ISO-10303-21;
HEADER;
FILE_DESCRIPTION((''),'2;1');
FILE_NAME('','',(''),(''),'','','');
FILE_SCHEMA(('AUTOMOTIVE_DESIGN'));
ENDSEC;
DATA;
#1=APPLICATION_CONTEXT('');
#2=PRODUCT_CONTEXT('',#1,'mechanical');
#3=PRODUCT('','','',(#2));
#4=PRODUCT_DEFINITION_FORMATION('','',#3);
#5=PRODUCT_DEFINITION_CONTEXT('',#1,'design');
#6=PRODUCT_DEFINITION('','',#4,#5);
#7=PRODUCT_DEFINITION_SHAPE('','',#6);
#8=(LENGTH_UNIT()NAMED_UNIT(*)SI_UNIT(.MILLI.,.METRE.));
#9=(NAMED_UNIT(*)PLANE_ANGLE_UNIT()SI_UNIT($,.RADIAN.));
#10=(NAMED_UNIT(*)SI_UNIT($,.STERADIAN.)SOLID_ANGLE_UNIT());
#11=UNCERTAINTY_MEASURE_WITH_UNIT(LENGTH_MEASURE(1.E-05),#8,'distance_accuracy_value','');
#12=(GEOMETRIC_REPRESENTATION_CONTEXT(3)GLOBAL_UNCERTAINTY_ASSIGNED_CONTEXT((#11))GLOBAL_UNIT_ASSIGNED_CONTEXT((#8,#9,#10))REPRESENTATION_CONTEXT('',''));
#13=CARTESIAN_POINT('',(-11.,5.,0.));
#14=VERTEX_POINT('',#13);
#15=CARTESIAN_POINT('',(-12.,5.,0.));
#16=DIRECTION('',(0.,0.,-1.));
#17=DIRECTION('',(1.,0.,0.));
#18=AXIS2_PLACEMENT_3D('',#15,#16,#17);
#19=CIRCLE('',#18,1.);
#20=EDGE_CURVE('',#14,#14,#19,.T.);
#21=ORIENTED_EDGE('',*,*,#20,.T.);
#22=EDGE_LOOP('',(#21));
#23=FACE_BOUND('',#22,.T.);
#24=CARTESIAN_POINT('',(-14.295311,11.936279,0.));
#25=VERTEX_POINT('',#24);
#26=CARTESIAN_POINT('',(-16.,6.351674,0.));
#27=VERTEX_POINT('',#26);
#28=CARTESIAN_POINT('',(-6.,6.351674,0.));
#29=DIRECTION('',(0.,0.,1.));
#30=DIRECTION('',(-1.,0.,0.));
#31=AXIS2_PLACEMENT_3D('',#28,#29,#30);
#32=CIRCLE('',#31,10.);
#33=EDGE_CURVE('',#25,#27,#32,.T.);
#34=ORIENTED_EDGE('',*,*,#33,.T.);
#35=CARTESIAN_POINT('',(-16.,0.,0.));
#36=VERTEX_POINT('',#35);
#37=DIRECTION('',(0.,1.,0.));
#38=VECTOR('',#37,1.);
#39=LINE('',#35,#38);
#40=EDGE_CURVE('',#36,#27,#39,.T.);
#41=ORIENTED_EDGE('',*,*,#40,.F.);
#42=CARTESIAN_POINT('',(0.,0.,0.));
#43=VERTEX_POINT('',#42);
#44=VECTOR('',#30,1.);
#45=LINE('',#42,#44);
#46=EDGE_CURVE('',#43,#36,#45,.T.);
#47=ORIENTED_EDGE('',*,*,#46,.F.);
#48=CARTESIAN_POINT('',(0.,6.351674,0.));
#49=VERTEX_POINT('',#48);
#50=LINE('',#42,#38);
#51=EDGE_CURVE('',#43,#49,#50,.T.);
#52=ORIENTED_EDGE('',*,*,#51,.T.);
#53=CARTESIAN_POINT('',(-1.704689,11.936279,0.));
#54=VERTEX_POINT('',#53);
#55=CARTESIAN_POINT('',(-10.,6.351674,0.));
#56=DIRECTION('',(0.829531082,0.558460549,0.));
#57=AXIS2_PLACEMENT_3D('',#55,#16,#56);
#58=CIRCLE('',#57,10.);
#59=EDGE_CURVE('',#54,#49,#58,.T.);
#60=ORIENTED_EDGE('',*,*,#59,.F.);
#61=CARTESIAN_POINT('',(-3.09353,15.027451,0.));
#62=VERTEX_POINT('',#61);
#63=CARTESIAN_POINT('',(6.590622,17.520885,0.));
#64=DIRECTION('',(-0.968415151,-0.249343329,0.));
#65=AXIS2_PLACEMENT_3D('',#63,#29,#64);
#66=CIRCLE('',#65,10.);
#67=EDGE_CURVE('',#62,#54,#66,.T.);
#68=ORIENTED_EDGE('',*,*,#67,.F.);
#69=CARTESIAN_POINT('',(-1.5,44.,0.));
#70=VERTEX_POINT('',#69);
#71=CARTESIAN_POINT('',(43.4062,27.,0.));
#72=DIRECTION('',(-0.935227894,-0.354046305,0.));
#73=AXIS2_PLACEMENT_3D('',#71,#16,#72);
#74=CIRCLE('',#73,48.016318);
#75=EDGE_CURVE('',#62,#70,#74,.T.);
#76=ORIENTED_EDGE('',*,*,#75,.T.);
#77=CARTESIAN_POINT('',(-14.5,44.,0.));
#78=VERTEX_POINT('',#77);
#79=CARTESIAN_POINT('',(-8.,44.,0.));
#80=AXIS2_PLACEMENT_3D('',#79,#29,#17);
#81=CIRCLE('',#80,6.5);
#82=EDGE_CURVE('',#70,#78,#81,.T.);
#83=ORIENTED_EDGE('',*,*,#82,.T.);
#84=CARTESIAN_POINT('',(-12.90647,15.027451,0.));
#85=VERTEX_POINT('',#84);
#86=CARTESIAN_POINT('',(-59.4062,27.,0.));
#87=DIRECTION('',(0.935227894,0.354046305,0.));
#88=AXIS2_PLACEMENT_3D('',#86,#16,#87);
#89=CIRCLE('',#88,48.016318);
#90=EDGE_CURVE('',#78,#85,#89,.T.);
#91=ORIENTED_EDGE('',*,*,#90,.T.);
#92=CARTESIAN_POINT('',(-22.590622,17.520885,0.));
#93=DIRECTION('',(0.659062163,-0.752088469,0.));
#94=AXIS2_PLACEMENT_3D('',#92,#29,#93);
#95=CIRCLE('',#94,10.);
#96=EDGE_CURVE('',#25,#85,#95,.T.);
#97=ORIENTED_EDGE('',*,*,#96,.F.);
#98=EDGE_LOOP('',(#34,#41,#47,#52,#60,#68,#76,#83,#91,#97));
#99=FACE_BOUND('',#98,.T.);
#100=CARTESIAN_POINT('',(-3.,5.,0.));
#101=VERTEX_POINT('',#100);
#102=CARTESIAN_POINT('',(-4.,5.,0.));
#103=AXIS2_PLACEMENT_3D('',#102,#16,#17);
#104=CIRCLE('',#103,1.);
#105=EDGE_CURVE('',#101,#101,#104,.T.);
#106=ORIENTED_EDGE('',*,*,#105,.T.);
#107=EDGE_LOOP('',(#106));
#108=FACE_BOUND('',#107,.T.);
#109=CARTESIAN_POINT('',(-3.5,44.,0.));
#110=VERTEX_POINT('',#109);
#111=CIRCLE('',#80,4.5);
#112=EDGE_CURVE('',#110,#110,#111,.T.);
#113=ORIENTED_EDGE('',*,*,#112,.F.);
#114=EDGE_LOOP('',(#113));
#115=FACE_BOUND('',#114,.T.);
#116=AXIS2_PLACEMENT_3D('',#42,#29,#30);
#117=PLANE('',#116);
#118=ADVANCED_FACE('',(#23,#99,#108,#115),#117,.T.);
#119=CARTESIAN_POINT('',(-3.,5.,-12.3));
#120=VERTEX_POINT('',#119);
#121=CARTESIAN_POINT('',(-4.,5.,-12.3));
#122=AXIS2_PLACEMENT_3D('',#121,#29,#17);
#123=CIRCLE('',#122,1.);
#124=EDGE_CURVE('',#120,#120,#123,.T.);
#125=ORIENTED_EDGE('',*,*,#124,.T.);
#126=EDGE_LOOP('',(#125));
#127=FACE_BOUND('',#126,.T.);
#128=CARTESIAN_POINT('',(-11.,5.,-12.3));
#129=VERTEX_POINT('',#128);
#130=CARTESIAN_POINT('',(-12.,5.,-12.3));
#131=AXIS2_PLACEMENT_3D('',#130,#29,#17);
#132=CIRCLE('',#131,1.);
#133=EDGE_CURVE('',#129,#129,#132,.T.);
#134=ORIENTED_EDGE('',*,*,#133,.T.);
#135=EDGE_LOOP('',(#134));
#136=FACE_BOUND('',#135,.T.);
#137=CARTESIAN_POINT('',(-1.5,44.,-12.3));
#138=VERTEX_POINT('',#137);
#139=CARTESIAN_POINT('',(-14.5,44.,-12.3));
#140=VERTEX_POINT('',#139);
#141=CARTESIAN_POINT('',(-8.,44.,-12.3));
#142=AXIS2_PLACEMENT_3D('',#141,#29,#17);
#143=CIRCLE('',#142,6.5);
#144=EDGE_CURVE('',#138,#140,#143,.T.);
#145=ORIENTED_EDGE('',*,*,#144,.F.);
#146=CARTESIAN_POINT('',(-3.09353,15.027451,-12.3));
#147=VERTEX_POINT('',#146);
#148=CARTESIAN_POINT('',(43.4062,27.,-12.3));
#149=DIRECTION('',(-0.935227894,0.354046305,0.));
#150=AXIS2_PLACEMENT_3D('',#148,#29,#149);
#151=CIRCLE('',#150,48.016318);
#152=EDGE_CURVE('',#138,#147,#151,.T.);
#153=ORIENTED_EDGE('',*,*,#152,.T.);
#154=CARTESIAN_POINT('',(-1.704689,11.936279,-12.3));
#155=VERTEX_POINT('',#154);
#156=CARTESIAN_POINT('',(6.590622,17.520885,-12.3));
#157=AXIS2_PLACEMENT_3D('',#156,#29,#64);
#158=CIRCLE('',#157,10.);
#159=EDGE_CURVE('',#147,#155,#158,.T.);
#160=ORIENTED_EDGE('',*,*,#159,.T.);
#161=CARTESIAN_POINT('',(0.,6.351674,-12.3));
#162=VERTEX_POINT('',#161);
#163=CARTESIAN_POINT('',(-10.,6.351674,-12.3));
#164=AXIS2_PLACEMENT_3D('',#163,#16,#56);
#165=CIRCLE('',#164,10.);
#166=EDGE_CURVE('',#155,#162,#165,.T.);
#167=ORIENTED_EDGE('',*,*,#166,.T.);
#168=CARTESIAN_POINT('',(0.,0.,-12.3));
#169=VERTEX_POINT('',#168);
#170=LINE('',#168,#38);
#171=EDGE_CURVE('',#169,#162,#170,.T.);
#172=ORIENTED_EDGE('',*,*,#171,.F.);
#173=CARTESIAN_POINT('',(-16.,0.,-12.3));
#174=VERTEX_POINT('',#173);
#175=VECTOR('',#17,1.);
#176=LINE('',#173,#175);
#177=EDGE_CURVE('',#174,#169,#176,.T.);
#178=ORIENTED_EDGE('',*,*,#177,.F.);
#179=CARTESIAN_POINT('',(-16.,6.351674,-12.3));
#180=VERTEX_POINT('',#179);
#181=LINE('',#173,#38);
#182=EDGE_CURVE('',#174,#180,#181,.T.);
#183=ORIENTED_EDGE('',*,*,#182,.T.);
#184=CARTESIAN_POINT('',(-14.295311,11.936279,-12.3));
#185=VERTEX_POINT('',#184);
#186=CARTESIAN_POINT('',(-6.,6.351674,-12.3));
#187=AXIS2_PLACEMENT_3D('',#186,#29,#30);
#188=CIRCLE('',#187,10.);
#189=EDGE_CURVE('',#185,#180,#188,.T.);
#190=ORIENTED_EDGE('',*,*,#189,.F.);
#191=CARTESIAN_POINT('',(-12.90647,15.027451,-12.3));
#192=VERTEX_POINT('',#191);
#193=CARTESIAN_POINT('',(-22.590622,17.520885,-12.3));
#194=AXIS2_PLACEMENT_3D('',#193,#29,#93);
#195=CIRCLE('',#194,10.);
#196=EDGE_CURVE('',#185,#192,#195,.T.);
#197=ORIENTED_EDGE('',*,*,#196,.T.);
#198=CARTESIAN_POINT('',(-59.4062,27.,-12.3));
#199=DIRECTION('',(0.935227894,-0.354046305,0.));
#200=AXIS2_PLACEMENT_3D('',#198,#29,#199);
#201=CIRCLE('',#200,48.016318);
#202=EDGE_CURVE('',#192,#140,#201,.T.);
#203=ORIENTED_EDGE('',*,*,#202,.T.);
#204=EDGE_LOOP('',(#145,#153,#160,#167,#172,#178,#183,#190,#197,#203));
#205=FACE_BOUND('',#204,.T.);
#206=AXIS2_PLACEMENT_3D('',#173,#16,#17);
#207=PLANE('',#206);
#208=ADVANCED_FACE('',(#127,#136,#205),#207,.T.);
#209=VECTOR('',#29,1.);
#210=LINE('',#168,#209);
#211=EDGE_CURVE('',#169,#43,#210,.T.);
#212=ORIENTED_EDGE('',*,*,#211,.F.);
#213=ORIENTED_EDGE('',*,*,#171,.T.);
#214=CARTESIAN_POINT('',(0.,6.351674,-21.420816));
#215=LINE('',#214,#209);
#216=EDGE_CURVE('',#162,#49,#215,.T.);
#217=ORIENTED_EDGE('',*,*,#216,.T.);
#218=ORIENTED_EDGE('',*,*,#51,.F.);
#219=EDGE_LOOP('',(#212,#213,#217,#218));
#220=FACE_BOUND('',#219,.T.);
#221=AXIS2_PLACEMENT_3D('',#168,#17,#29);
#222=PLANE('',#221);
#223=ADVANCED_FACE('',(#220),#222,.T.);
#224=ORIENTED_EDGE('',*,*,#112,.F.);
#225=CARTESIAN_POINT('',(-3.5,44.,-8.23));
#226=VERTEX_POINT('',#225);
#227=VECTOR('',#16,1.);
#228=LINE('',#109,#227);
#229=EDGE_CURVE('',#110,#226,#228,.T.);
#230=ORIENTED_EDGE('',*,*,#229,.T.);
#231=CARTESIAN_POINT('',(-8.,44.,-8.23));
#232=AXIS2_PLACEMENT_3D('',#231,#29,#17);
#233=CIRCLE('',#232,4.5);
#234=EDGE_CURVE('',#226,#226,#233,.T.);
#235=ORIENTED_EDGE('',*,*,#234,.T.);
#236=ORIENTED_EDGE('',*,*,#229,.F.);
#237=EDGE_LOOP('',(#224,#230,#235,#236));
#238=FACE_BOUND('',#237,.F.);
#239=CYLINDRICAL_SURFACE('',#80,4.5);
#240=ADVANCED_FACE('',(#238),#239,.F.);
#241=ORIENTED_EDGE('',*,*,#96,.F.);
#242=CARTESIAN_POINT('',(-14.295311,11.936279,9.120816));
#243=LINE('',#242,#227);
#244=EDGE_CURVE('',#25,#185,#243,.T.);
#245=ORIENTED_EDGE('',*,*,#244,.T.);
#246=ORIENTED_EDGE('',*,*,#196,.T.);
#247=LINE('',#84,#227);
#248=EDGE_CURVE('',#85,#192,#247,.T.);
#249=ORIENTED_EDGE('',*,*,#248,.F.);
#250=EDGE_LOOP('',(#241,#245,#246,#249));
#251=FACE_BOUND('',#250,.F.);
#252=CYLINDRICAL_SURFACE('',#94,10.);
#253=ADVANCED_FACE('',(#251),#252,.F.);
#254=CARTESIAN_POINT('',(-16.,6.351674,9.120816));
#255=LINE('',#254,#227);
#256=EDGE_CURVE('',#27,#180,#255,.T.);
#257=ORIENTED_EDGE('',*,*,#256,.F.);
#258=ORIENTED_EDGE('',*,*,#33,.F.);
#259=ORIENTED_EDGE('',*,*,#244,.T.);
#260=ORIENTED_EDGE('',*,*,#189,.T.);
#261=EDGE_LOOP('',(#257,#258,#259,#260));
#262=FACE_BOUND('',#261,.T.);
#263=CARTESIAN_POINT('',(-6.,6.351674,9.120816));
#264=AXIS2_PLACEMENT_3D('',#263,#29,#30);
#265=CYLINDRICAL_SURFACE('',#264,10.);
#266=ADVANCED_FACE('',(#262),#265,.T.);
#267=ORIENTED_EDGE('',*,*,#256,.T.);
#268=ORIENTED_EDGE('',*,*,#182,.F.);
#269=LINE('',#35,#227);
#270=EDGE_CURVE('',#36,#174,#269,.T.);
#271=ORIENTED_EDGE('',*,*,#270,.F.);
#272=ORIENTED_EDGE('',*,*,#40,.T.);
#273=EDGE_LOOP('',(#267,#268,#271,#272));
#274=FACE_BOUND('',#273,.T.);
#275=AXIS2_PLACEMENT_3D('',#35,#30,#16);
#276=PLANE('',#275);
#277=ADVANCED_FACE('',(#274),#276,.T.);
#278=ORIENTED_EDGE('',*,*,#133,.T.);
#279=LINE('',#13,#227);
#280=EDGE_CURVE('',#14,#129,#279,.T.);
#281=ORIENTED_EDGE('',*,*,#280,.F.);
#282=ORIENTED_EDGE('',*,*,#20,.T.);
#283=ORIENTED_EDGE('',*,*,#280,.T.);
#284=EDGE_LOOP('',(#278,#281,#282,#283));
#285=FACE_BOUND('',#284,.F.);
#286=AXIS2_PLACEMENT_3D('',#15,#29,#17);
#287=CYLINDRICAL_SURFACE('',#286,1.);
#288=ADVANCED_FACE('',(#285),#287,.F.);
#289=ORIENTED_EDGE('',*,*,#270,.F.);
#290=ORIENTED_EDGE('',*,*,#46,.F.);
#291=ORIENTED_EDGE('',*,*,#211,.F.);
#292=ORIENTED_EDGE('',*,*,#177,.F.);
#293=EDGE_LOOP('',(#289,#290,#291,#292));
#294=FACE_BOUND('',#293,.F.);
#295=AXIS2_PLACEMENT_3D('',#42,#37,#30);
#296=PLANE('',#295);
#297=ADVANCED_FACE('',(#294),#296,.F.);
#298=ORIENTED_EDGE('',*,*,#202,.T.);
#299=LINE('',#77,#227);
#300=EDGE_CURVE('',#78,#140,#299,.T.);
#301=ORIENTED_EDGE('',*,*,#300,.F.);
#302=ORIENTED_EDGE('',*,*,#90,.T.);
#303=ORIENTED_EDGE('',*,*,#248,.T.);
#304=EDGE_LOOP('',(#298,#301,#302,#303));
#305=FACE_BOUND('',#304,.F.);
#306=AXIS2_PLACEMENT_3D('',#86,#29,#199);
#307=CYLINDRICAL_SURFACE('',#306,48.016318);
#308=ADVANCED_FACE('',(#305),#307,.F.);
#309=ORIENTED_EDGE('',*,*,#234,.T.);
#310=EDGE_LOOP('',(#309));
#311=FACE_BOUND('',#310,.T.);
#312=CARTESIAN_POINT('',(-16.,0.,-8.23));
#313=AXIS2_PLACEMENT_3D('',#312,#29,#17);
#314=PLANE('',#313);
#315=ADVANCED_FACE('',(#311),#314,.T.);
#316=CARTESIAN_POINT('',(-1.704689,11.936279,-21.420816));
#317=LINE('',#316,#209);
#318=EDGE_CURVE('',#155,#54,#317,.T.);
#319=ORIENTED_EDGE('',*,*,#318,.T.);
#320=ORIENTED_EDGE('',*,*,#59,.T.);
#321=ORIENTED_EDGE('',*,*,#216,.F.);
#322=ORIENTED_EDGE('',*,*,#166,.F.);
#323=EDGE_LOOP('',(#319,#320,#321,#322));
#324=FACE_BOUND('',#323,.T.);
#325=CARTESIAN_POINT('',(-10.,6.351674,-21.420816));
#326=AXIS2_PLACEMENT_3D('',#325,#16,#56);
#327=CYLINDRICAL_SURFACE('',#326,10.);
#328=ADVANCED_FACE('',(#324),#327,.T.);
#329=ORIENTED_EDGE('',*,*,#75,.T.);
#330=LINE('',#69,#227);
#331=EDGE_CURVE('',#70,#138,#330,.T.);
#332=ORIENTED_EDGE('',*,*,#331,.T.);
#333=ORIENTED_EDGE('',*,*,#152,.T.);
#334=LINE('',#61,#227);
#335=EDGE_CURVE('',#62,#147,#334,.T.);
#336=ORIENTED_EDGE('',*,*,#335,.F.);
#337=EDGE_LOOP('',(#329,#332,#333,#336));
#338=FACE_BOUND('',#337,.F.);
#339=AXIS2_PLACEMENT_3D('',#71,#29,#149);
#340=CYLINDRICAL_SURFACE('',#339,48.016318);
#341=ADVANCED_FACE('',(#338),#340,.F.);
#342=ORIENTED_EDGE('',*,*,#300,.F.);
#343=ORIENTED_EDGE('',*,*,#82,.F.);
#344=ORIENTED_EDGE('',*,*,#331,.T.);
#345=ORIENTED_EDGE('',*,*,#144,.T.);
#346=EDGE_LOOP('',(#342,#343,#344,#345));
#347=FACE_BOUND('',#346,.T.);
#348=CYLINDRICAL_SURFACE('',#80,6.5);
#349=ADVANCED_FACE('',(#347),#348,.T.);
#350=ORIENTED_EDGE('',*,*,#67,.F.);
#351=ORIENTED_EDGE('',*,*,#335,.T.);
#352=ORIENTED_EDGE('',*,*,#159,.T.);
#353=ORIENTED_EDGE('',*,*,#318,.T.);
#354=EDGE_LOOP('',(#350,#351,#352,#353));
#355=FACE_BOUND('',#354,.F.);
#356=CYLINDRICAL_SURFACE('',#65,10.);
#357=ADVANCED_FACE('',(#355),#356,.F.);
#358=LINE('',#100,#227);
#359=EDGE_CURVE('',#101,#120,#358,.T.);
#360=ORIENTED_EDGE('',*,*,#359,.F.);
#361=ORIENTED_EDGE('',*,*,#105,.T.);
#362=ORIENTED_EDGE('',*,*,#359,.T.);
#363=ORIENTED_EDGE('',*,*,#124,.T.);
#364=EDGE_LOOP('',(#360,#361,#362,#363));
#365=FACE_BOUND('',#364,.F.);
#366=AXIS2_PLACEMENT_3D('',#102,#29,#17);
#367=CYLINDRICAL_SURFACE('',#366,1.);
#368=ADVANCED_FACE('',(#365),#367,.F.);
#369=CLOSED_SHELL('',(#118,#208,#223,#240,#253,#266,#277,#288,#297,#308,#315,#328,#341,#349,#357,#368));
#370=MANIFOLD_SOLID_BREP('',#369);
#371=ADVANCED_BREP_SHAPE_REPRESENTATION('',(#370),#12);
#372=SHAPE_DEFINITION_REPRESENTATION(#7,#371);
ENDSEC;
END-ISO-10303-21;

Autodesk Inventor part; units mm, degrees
ref_plane "YZ Plane" through (0, 0, 0) normal (1, 0, 0) x (0, 1, 0)
ref_plane "XZ Plane" through (0, 0, 0) normal (0, 1, 0) x (-1, 0, 0)
ref_plane "XY Plane" through (0, 0, 0) normal (0, 0, 1) x (1, 0, 0)
sketch "Sketch1" plane through (0, 0, 0) normal (0, 1, 0) x (-1, 0, 0)
  line L0 (0, 0) -> (16, 0)
  line L1 (16, 0) -> (16, -12.3)
  line L2 (16, -12.3) -> (0, -12.3)
  line L3 (0, -12.3) -> (0, 0)
  dimension "d0" = 16
  dimension "d1" = 12.3
extrude "Extrusion1" add sketch "Sketch1" along normal blind 10
sketch "Sketch2" plane through (0, 10, 0) normal (0, 1, 0) x (1, 0, 0)
  line L0 (-16, 0) -> (0, 0) projected
  line L1 (-8, 0) -> (-8, 12.3)
  line L2 (0, 12.3) -> (-16, 12.3) projected
  line L3 (-14.5, 0) -> (-14.5, 12.3)
  line L4 (-1.5, 0) -> (-1.5, 12.3)
  dimension "d4" = 6.5
  dimension "d5" = 6.5
extrude "Extrusion2" add sketch "Sketch2" along normal blind 40.5
sketch "Sketch3" plane through (-16, 0, 0) normal (0, 0, 1) x (1, 0, 0)
  line L0 (14.5, 50.5) -> (1.5, 50.5) projected
  line L1 (8, 50.5) -> (8, 0)
  line L2 (0, 0) -> (16, 0) projected
  circle A0 centre (8, 44) radius 4.5
  line L3 (1.5, 50.5) -> (14.5, 50.5) projected
  circle A1 centre (8, 44) radius 6.5
  line L4 (14.5, 10) -> (14.5, 50.5) projected
  line L5 (14.5, 30.25) -> (1.5, 30.25)
  line L6 (1.5, 10) -> (1.5, 50.5) projected
  line L7 (8, 30.25) -> (11.5, 30.25)
  arc A2 (14.5, 44) -> (14.5, 10) centre (59.4062, 27) ccw
  line L8 (8, 30.25) -> (4.5, 30.25)
  arc A3 (1.5, 10) -> (1.5, 44) centre (-43.4062, 27) ccw
  dimension "d8" = 6.5
  dimension "d9" = 9
  dimension "d10" = 13
  dimension "d11" = 3.5
  dimension "d12" = 3.5
extrude "Extrusion3" cut sketch "Sketch3" against normal blind 13.5 contours L4 A1 L0 | A1 L6 L0 | L4 L5 A2 A1 | A1 A2 | A3 A1 | A1 A3 L5 L6 | L4 A2 L5 | L5 A3 L6
fillet "Fillet1" radius 10 4 edges at (0, 10, -6.15) (-1.5, 10, -6.15) (-14.5, 10, -6.15) (-16, 10, -6.15)
sketch "Sketch4" plane through (-16, 0, 0) normal (0, 0, 1) x (1, 0, 0)
  arc A0 (14.5, 44) -> (1.5, 44) centre (8, 44) ccw projected
  circle A1 centre (8, 44) radius 4.5
  point P0 (16, 0)
  dimension "d16" = 9
extrude "Extrusion4" cut sketch "Sketch4" against normal blind 8.23
sketch "Sketch5" plane through (0, 0, 0) normal (0, -1, 0) x (1, 0, 0)
  point P0 (0, 0)
sketch "Sketch7" plane through (-16, 0, 0) normal (0, 0, 1) x (1, 0, 0)
  line L0 (16, 0) -> (0, 0) projected
  line L1 (0, 0) -> (16, 0)
  line L2 (16, 0) -> (16, 10)
  line L3 (16, 10) -> (0, 10)
  line L4 (0, 10) -> (0, 0)
  line L5 (0, 5) -> (16, 5)
  line L6 (8, 10) -> (8, 0)
  circle A0 centre (4, 5) radius 1
  circle A1 centre (12, 5) radius 1
extrude "Extrusion6" cut sketch "Sketch7" against normal blind 12.3 contours A1 L5 | L5 A1 | A0 L5 | L5 A0
properties part number "pawn"
